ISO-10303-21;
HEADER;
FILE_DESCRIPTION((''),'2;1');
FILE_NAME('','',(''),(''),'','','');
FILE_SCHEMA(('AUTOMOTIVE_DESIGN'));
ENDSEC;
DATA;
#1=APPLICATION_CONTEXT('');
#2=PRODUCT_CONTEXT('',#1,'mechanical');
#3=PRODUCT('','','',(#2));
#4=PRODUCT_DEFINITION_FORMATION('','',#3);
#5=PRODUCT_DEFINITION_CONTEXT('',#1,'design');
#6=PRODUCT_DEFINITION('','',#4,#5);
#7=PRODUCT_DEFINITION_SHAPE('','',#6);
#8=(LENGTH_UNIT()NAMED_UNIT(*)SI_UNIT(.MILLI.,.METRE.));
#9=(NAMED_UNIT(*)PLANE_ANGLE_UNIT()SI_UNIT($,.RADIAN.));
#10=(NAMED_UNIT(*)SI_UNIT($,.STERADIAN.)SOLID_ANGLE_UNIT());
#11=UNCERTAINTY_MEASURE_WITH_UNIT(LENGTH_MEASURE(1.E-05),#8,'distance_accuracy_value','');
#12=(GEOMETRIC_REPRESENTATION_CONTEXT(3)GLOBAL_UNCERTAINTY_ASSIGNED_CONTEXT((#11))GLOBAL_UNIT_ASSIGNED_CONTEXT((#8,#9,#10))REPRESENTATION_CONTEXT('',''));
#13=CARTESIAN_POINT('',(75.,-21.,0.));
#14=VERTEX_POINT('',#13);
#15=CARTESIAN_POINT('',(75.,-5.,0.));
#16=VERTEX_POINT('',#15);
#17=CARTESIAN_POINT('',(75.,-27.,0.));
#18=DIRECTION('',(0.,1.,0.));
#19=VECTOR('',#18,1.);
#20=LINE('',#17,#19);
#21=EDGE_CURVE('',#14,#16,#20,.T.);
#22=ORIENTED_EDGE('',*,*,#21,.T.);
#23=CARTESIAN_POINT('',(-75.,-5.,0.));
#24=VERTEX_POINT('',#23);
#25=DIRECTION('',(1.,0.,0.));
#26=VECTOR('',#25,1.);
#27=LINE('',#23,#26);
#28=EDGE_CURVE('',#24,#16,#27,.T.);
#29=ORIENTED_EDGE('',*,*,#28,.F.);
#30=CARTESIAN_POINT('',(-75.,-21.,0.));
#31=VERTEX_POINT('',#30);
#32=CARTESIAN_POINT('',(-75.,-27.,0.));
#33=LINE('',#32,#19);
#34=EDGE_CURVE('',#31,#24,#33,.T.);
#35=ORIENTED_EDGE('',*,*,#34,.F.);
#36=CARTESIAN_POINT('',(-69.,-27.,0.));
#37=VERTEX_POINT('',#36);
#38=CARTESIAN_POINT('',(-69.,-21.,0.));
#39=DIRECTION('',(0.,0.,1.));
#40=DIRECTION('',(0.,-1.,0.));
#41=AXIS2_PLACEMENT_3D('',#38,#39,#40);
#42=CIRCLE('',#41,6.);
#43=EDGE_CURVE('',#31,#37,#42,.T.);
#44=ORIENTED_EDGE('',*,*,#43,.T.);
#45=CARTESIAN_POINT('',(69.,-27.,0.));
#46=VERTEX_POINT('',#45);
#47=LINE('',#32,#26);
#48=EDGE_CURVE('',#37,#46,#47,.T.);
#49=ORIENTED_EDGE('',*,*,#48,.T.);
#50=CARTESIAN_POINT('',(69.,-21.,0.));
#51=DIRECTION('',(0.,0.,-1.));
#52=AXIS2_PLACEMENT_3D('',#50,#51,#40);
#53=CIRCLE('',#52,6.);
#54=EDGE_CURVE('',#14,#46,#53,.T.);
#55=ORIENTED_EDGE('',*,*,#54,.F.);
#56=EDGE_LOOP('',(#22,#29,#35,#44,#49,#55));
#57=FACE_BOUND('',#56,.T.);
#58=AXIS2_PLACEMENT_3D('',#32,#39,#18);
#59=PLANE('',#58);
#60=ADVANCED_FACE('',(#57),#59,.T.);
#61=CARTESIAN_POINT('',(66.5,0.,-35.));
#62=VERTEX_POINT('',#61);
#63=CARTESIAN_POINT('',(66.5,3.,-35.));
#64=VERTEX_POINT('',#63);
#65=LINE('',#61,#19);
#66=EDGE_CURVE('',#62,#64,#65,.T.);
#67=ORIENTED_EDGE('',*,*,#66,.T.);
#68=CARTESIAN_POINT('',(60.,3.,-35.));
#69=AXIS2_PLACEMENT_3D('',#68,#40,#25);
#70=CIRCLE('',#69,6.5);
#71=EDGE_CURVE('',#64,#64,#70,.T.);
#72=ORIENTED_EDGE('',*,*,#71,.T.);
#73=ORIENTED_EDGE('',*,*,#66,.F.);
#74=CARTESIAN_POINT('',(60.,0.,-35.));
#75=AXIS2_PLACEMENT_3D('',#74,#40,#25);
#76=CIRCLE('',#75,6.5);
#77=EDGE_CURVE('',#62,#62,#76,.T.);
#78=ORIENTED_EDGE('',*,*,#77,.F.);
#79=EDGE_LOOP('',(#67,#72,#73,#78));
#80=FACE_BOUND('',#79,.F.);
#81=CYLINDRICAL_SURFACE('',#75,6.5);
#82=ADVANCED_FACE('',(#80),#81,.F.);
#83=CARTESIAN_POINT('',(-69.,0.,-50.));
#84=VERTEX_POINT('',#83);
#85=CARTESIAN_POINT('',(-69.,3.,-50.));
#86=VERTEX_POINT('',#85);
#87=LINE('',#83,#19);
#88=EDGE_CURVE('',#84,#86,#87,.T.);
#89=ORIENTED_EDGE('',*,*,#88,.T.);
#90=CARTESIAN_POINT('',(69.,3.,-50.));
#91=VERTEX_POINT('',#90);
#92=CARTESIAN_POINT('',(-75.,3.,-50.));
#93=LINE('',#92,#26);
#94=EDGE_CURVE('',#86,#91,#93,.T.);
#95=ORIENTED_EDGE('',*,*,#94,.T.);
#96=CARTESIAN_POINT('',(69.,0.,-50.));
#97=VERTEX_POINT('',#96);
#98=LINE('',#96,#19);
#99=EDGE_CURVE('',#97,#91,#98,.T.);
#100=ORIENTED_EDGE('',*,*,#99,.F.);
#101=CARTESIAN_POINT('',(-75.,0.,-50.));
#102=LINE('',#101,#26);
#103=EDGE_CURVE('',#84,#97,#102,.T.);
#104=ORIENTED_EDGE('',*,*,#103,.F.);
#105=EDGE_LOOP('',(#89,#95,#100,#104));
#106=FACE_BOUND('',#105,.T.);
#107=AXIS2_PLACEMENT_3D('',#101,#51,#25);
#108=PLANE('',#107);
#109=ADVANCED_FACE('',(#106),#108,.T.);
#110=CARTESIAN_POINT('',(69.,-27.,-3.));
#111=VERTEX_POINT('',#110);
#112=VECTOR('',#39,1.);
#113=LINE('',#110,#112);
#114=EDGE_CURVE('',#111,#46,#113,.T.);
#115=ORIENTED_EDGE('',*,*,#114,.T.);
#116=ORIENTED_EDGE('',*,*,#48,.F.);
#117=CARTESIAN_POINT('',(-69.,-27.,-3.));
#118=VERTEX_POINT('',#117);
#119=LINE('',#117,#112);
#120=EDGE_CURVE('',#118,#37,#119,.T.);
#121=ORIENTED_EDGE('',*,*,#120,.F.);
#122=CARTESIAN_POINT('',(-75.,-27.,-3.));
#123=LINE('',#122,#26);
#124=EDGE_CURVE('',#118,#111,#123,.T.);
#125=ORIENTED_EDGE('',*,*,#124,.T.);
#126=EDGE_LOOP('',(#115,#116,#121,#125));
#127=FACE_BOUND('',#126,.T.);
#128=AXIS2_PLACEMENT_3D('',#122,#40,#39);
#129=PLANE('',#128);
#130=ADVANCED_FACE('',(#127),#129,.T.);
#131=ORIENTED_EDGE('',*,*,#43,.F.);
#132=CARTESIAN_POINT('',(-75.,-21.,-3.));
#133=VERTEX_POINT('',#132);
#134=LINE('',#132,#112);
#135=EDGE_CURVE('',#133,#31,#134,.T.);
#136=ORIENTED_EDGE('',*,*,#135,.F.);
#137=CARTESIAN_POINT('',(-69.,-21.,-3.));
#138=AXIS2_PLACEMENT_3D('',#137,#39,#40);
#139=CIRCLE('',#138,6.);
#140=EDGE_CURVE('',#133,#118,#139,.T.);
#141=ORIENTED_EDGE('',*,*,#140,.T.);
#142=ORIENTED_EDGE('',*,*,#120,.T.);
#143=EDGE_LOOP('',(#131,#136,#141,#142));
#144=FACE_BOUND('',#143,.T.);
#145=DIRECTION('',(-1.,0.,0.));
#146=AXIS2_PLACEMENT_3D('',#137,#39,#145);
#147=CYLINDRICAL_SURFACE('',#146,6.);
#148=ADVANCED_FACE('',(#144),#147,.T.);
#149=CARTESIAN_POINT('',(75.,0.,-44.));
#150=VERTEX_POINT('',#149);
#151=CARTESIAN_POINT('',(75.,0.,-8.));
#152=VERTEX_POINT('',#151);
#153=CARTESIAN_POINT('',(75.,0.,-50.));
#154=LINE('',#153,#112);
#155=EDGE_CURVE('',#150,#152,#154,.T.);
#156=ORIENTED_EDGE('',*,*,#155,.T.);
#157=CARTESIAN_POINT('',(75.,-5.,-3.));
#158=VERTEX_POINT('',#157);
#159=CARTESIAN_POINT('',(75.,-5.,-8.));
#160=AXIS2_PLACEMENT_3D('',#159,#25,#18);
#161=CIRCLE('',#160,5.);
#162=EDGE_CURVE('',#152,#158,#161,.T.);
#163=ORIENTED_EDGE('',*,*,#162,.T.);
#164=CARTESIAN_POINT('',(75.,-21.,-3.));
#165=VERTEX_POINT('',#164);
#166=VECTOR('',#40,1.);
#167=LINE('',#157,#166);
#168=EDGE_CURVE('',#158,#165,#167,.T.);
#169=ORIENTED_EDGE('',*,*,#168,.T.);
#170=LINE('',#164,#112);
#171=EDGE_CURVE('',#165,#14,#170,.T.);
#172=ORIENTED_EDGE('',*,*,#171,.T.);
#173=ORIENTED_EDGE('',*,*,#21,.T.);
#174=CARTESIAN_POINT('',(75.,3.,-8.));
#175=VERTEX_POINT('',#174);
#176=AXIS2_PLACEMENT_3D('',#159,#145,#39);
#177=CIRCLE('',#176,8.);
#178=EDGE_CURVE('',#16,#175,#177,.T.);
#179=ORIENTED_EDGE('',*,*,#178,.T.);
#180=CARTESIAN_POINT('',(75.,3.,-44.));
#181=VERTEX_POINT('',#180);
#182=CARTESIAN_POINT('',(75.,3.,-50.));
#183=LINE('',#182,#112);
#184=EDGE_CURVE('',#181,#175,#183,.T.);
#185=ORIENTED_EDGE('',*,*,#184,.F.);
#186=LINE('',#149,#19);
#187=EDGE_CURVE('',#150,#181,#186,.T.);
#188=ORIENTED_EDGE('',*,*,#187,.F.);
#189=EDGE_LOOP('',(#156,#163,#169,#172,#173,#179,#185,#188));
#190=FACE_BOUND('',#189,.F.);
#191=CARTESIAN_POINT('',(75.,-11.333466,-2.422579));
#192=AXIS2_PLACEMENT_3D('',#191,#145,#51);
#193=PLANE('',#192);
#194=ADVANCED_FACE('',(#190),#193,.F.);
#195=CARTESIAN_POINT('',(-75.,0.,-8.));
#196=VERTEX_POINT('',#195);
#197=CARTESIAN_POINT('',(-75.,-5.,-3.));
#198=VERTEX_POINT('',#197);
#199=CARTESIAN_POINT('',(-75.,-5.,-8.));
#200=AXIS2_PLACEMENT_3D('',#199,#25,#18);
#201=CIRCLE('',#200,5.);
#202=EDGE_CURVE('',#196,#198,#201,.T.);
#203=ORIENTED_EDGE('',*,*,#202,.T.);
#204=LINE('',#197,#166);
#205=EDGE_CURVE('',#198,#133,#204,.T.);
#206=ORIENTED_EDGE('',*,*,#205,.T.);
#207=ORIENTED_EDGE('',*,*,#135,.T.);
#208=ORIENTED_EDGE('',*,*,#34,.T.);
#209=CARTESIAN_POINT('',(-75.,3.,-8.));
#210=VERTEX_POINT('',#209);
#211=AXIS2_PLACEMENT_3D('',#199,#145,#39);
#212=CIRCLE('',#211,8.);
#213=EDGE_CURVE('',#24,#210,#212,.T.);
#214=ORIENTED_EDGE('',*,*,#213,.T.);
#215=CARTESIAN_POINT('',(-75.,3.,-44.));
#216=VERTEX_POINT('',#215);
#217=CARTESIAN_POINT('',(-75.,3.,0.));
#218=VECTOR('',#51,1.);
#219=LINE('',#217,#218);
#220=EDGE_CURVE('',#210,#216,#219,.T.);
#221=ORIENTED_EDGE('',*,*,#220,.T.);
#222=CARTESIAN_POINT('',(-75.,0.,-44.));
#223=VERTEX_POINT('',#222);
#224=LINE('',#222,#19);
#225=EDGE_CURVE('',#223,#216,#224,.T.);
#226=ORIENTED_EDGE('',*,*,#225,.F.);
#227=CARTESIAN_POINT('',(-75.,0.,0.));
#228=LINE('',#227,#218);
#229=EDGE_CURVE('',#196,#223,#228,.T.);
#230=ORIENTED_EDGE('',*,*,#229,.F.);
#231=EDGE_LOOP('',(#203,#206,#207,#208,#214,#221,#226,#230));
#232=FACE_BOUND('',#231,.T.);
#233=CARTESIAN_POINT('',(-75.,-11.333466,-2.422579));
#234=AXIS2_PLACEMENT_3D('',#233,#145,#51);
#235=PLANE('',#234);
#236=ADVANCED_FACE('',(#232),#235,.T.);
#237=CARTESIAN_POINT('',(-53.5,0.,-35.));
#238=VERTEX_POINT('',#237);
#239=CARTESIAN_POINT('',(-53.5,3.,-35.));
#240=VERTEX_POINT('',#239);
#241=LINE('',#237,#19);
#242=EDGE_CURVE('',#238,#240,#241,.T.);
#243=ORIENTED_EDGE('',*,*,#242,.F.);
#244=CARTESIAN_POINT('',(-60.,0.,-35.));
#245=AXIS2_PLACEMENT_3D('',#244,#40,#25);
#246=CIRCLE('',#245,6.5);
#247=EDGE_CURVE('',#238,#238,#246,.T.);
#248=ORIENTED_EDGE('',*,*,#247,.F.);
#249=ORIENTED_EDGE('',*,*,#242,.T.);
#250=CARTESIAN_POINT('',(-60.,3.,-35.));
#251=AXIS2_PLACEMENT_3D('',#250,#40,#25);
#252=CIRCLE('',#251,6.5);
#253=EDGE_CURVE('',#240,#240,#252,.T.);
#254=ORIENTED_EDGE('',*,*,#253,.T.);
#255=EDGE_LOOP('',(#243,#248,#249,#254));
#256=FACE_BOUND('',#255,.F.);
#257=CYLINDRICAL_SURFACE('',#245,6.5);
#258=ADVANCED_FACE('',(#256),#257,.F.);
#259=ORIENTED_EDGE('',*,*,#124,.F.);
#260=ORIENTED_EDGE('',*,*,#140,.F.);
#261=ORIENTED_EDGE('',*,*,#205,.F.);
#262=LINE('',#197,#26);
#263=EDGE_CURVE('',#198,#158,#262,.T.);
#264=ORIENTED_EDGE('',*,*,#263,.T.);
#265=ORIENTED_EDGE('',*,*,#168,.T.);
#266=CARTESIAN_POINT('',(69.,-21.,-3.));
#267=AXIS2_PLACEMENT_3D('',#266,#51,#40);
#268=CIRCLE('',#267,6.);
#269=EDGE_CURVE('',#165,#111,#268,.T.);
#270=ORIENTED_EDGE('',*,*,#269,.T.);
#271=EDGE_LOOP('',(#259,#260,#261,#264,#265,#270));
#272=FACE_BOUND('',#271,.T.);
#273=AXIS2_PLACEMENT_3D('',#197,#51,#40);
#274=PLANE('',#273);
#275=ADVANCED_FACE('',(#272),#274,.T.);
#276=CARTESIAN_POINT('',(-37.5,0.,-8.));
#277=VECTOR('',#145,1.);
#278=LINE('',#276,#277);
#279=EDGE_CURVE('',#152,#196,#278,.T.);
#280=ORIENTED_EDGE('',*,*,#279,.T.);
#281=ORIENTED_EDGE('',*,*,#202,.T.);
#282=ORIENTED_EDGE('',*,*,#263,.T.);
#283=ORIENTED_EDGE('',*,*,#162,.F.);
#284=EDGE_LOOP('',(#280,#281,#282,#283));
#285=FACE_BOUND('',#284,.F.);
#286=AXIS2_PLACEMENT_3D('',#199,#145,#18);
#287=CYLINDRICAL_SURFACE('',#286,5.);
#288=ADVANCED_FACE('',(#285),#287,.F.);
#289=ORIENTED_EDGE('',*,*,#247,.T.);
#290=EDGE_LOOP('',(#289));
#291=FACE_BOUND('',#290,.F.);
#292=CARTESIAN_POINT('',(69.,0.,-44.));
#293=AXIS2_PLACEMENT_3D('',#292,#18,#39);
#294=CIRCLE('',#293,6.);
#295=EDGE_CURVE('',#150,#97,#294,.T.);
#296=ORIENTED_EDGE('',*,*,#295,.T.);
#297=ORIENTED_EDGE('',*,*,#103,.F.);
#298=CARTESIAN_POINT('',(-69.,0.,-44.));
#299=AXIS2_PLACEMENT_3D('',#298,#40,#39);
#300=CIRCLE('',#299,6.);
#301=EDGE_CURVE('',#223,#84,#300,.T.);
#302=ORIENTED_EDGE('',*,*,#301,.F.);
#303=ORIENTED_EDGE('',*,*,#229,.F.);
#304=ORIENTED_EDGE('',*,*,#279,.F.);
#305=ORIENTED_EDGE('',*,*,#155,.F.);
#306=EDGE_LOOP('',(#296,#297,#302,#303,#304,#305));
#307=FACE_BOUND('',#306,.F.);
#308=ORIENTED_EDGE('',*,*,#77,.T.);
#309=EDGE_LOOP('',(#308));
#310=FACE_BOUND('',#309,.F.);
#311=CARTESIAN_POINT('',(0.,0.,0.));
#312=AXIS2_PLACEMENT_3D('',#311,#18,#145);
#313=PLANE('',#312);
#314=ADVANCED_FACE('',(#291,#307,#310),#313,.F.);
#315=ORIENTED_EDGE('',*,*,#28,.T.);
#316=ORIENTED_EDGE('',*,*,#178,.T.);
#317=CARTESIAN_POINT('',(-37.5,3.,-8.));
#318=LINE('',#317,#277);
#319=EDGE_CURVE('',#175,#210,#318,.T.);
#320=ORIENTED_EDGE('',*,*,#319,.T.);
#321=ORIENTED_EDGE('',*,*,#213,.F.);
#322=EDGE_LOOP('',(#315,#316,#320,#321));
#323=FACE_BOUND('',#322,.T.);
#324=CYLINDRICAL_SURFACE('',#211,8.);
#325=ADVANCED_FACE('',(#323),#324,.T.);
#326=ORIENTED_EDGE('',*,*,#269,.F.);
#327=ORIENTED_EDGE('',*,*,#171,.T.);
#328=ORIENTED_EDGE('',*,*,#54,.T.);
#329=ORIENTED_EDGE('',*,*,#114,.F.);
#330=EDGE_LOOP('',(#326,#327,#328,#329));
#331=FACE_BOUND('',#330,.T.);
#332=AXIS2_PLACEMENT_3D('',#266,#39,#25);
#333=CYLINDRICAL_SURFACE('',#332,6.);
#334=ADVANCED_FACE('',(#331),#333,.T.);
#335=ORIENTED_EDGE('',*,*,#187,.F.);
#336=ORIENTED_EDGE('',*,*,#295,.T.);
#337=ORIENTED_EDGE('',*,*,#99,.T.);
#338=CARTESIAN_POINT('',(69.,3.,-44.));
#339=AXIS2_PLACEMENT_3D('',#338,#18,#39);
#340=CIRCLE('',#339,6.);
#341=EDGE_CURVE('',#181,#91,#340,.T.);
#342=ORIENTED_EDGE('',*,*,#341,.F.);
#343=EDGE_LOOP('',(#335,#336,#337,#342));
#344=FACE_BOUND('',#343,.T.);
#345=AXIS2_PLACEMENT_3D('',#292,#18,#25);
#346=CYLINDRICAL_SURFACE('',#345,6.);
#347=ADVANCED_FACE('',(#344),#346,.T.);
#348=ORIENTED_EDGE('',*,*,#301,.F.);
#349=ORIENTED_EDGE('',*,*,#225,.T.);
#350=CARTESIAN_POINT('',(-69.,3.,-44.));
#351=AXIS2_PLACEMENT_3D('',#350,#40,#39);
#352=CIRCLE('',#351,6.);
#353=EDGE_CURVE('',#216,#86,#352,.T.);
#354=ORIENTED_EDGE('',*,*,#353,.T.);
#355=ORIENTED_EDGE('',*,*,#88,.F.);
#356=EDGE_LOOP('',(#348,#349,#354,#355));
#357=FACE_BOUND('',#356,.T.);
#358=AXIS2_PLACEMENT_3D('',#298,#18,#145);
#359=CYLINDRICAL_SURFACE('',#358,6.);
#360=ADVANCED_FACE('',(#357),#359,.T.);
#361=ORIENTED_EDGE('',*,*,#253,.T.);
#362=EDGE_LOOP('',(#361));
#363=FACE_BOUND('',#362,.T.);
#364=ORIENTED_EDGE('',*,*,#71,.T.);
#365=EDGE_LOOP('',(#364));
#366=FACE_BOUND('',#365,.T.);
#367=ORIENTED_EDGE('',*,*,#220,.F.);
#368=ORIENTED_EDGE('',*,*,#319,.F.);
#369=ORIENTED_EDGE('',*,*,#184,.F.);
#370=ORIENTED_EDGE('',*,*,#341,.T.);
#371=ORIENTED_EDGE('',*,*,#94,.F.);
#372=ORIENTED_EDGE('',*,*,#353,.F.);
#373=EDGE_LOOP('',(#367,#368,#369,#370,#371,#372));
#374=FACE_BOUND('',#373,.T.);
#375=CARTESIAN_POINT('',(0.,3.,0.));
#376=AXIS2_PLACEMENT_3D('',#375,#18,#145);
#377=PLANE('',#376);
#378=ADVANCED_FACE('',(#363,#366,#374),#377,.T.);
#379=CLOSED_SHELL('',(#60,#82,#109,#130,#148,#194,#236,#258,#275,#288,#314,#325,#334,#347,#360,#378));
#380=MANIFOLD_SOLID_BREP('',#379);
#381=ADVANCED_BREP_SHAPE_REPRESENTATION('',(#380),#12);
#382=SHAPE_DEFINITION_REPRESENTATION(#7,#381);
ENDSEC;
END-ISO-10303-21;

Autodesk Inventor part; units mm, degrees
ref_plane "YZ Plane" through (0, 0, 0) normal (1, 0, 0) x (0, 1, 0)
ref_plane "XZ Plane" through (0, 0, 0) normal (0, 1, 0) x (-1, 0, 0)
ref_plane "XY Plane" through (0, 0, 0) normal (0, 0, 1) x (1, 0, 0)
sketch "Sketch4" plane through (0, 0, 0) normal (0, 1, 0) x (-1, 0, 0)
  line L0 (75, -50) -> (-75, -50)
  line L1 (-75, -50) -> (-75, 0)
  line L2 (-75, 0) -> (75, 0)
  line L3 (75, 0) -> (75, -50)
  point P0 (0, 0)
  point P1 (0, 0)
  dimension "d36" = 150
  dimension "d37" = 50
extrude "Plate2" add sketch "Sketch4" along normal blind 3
sketch "Sketch5" plane through (0, 0, 0) normal (0, -1, 0) x (1, 0, 0)
  circle A0 centre (-60, -35) radius 6.5
  circle A1 centre (60, -35) radius 6.5
  line L0 (0, 0) -> (0, -50) construction
  line L1 (75, -50) -> (-75, -50) construction
  dimension "d39" = 120
  dimension "d40" = 15
  dimension "d41" = 13
extrude "Cut1" cut sketch "Sketch5" against normal blind 3
sketch "Sketch6" plane through (-75, 3, -3) normal (0, 0, 1) x (1, 0, 0)
  line L0 (150, 0) -> (0, 0)
  line L1 (0, 0) -> (0, -30)
  line L2 (0, -30) -> (150, -30)
  line L3 (150, -30) -> (150, 0)
edge flange "Flange1" height 30 angle 90 thickness 3 bend radius 5 thickness toward (0, 0, 1) relief round relief width 3 relief depth 1.5 edges at (0, 0, 0) wall of the first edge with corners at (75, 3, -3) (-75, 3, -3) (-75, -27, -3) (75, -27, -3)
bend "Bend1"
corner "Corner1"
fillet "Corner Round6" radius 6 4 edges at (75, -27, -1.5) (-75, 1.5, -50) (75, 1.5, -50) (-75, -27, -1.5)
equation "\"d42\" = Thickness"
equation "\"d38\" = Thickness"
equation "\"d44\" = BendReliefWidth"
equation "\"d45\" = BendReliefDepth"
equation "\"d46\" = MinimumRemnant"
equation "\"d47\" = TransitionRadius"
equation "\"d50\" = BendRadius"
equation "\"d51\" = CornerReliefSize"
equation "\"d52\" = GapSize"
equation "\"d53\" = JacobiRadiusSize"
equation "\"BendReliefWidth\" = Thickness"
equation "\"BendReliefDepth\" = 0.5 * Thickness"
equation "\"CornerReliefSize\" = 4 * Thickness"
equation "\"MinimumRemnant\" = 2 * Thickness"
equation "\"TransitionRadius\" = BendRadius"
equation "\"JacobiRadiusSize\" = BendRadius"
equation "\"GapSize\" = Thickness"
equation "\"Thickness\" = 3"
equation "\"BendRadius\" = 5"
properties part number "NDM-VOS 712 flange" material "Stainless Steel"
